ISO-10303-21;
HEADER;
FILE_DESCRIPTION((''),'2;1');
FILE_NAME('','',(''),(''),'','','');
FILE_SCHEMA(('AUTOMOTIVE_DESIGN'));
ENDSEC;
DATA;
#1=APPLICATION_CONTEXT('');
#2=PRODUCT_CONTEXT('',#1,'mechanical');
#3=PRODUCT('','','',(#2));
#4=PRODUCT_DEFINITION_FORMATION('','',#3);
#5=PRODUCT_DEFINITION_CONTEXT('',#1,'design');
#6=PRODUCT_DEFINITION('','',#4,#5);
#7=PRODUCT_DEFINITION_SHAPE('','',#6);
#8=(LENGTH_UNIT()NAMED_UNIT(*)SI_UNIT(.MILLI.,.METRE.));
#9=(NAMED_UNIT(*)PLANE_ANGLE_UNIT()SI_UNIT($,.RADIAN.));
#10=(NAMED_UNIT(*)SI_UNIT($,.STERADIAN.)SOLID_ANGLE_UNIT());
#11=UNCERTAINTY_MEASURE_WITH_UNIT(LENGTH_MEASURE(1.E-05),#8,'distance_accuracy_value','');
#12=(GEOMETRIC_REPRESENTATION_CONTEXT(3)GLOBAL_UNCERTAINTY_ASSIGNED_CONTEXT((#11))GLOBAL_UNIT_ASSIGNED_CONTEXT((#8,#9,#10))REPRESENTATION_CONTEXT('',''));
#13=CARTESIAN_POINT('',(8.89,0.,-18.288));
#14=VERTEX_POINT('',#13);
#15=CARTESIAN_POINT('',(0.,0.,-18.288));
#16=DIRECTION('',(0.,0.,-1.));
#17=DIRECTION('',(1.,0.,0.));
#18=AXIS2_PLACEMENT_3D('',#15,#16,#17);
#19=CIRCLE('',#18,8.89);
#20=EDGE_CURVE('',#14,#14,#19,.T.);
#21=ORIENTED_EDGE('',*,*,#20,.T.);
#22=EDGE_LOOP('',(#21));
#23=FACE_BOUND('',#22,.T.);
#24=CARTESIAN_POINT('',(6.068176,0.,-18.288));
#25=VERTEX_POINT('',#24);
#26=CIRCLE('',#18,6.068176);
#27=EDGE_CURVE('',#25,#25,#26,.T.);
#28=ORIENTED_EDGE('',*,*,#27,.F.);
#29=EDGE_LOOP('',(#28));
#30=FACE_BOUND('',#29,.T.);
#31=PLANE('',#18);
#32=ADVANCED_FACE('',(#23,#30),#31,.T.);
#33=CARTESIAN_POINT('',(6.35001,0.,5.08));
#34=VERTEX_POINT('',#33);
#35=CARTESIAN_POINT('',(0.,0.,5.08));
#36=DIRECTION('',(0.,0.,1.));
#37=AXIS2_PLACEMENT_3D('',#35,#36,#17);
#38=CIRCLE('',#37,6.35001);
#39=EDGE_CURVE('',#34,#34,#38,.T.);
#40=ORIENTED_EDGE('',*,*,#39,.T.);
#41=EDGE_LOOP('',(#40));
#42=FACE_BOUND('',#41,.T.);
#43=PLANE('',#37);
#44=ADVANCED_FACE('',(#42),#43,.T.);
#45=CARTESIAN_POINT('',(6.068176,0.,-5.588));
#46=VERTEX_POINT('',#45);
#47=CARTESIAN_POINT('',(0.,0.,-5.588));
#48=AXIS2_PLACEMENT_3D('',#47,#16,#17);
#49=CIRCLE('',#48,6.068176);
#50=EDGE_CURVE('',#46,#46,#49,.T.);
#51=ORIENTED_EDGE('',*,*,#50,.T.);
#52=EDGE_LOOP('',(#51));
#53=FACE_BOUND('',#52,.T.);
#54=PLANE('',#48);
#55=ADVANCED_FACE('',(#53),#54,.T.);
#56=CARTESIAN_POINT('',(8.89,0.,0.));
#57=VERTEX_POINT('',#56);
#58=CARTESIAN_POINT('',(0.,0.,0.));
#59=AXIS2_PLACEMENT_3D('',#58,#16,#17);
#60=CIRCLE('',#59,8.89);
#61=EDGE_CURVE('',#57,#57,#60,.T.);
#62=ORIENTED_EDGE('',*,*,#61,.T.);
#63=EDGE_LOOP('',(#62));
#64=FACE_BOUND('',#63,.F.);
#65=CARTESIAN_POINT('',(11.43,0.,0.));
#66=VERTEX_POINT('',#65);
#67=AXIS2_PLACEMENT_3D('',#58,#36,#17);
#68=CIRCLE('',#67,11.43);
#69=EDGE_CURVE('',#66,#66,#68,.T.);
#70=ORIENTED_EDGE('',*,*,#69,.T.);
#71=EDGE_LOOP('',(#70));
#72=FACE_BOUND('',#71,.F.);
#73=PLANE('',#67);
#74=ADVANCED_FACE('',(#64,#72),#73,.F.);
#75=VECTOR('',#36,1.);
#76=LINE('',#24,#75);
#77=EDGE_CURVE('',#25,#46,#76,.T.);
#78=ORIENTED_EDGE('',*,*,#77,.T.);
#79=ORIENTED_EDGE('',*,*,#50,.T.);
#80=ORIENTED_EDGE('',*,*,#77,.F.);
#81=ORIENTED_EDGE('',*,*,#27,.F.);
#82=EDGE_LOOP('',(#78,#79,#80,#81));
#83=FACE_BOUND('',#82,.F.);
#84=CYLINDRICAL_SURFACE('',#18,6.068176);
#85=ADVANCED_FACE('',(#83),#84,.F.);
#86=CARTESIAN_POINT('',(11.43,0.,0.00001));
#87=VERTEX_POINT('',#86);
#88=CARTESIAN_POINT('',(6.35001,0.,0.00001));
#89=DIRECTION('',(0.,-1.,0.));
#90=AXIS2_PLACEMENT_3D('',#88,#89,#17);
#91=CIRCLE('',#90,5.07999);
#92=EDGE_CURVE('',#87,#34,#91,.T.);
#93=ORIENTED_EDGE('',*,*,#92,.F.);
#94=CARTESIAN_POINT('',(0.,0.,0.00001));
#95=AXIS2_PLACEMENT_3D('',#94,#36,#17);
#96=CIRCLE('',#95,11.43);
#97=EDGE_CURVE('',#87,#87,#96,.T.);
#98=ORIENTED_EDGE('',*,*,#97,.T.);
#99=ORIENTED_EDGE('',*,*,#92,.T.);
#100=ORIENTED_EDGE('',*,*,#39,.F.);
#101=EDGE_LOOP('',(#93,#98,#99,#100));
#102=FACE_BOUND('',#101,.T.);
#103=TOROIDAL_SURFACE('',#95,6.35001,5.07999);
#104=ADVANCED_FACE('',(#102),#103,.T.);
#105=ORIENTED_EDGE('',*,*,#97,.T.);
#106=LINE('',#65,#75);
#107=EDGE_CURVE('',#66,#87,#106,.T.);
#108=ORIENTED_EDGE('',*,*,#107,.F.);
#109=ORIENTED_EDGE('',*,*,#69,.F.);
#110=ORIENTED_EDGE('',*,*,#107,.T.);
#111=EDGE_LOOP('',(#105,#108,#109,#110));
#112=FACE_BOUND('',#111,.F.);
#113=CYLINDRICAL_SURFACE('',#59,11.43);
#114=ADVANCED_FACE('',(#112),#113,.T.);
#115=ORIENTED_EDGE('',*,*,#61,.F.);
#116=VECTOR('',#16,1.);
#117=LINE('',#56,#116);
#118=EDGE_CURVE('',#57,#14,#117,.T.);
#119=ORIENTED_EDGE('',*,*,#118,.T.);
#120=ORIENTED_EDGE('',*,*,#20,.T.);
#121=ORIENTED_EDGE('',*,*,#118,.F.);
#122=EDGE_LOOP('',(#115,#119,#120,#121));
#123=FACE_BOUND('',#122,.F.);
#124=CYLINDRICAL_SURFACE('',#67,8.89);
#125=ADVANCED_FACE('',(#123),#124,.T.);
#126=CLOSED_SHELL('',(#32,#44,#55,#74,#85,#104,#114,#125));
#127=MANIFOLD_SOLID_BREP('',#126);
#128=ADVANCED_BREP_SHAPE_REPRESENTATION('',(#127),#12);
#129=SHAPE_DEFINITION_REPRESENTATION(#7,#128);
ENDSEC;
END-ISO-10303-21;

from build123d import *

# Parameters (mm, degrees)
F0_R     = 11.43
F1_DEPTH = 5.08
F2_R     = 5.07999
F3_R     = 8.89
F4_DEPTH = 18.288
F5_R     = 6.0681762548
F6_DEPTH = 12.7


# Not quite as in the source:
# - a fillet or chamfer is up to 0.001 mm smaller than in the source, because OpenCascade refuses the exact size


with BuildPart() as f1:
    # F0 (on Top) → F1 (new body)
    with BuildSketch(Plane.XY):
        Circle(F0_R)
    extrude(amount=F1_DEPTH)

    # F2 (radius 5.08 in the source; OpenCascade refuses exactly that, so slightly less here)
    f2_edges = [f1.edges().sort_by_distance(p)[0] for p in [
        (-11.43, 0, 5.08),
    ]]
    fillet(f2_edges, radius=F2_R)

    # F3 (on face) → F4 (join)
    with BuildSketch(Plane(origin=(0, 0, 0), x_dir=(1, 0, 0), z_dir=(0, 0, -1))):
        Circle(F3_R)
    extrude(amount=F4_DEPTH)

    # F5 (on face) → F6 (cut)
    with BuildSketch(Plane(origin=(0, 0, -18.288), x_dir=(1, 0, 0), z_dir=(0, 0, -1))):
        Circle(F5_R)
    extrude(amount=-F6_DEPTH, mode=Mode.SUBTRACT)


solid = f1.part
